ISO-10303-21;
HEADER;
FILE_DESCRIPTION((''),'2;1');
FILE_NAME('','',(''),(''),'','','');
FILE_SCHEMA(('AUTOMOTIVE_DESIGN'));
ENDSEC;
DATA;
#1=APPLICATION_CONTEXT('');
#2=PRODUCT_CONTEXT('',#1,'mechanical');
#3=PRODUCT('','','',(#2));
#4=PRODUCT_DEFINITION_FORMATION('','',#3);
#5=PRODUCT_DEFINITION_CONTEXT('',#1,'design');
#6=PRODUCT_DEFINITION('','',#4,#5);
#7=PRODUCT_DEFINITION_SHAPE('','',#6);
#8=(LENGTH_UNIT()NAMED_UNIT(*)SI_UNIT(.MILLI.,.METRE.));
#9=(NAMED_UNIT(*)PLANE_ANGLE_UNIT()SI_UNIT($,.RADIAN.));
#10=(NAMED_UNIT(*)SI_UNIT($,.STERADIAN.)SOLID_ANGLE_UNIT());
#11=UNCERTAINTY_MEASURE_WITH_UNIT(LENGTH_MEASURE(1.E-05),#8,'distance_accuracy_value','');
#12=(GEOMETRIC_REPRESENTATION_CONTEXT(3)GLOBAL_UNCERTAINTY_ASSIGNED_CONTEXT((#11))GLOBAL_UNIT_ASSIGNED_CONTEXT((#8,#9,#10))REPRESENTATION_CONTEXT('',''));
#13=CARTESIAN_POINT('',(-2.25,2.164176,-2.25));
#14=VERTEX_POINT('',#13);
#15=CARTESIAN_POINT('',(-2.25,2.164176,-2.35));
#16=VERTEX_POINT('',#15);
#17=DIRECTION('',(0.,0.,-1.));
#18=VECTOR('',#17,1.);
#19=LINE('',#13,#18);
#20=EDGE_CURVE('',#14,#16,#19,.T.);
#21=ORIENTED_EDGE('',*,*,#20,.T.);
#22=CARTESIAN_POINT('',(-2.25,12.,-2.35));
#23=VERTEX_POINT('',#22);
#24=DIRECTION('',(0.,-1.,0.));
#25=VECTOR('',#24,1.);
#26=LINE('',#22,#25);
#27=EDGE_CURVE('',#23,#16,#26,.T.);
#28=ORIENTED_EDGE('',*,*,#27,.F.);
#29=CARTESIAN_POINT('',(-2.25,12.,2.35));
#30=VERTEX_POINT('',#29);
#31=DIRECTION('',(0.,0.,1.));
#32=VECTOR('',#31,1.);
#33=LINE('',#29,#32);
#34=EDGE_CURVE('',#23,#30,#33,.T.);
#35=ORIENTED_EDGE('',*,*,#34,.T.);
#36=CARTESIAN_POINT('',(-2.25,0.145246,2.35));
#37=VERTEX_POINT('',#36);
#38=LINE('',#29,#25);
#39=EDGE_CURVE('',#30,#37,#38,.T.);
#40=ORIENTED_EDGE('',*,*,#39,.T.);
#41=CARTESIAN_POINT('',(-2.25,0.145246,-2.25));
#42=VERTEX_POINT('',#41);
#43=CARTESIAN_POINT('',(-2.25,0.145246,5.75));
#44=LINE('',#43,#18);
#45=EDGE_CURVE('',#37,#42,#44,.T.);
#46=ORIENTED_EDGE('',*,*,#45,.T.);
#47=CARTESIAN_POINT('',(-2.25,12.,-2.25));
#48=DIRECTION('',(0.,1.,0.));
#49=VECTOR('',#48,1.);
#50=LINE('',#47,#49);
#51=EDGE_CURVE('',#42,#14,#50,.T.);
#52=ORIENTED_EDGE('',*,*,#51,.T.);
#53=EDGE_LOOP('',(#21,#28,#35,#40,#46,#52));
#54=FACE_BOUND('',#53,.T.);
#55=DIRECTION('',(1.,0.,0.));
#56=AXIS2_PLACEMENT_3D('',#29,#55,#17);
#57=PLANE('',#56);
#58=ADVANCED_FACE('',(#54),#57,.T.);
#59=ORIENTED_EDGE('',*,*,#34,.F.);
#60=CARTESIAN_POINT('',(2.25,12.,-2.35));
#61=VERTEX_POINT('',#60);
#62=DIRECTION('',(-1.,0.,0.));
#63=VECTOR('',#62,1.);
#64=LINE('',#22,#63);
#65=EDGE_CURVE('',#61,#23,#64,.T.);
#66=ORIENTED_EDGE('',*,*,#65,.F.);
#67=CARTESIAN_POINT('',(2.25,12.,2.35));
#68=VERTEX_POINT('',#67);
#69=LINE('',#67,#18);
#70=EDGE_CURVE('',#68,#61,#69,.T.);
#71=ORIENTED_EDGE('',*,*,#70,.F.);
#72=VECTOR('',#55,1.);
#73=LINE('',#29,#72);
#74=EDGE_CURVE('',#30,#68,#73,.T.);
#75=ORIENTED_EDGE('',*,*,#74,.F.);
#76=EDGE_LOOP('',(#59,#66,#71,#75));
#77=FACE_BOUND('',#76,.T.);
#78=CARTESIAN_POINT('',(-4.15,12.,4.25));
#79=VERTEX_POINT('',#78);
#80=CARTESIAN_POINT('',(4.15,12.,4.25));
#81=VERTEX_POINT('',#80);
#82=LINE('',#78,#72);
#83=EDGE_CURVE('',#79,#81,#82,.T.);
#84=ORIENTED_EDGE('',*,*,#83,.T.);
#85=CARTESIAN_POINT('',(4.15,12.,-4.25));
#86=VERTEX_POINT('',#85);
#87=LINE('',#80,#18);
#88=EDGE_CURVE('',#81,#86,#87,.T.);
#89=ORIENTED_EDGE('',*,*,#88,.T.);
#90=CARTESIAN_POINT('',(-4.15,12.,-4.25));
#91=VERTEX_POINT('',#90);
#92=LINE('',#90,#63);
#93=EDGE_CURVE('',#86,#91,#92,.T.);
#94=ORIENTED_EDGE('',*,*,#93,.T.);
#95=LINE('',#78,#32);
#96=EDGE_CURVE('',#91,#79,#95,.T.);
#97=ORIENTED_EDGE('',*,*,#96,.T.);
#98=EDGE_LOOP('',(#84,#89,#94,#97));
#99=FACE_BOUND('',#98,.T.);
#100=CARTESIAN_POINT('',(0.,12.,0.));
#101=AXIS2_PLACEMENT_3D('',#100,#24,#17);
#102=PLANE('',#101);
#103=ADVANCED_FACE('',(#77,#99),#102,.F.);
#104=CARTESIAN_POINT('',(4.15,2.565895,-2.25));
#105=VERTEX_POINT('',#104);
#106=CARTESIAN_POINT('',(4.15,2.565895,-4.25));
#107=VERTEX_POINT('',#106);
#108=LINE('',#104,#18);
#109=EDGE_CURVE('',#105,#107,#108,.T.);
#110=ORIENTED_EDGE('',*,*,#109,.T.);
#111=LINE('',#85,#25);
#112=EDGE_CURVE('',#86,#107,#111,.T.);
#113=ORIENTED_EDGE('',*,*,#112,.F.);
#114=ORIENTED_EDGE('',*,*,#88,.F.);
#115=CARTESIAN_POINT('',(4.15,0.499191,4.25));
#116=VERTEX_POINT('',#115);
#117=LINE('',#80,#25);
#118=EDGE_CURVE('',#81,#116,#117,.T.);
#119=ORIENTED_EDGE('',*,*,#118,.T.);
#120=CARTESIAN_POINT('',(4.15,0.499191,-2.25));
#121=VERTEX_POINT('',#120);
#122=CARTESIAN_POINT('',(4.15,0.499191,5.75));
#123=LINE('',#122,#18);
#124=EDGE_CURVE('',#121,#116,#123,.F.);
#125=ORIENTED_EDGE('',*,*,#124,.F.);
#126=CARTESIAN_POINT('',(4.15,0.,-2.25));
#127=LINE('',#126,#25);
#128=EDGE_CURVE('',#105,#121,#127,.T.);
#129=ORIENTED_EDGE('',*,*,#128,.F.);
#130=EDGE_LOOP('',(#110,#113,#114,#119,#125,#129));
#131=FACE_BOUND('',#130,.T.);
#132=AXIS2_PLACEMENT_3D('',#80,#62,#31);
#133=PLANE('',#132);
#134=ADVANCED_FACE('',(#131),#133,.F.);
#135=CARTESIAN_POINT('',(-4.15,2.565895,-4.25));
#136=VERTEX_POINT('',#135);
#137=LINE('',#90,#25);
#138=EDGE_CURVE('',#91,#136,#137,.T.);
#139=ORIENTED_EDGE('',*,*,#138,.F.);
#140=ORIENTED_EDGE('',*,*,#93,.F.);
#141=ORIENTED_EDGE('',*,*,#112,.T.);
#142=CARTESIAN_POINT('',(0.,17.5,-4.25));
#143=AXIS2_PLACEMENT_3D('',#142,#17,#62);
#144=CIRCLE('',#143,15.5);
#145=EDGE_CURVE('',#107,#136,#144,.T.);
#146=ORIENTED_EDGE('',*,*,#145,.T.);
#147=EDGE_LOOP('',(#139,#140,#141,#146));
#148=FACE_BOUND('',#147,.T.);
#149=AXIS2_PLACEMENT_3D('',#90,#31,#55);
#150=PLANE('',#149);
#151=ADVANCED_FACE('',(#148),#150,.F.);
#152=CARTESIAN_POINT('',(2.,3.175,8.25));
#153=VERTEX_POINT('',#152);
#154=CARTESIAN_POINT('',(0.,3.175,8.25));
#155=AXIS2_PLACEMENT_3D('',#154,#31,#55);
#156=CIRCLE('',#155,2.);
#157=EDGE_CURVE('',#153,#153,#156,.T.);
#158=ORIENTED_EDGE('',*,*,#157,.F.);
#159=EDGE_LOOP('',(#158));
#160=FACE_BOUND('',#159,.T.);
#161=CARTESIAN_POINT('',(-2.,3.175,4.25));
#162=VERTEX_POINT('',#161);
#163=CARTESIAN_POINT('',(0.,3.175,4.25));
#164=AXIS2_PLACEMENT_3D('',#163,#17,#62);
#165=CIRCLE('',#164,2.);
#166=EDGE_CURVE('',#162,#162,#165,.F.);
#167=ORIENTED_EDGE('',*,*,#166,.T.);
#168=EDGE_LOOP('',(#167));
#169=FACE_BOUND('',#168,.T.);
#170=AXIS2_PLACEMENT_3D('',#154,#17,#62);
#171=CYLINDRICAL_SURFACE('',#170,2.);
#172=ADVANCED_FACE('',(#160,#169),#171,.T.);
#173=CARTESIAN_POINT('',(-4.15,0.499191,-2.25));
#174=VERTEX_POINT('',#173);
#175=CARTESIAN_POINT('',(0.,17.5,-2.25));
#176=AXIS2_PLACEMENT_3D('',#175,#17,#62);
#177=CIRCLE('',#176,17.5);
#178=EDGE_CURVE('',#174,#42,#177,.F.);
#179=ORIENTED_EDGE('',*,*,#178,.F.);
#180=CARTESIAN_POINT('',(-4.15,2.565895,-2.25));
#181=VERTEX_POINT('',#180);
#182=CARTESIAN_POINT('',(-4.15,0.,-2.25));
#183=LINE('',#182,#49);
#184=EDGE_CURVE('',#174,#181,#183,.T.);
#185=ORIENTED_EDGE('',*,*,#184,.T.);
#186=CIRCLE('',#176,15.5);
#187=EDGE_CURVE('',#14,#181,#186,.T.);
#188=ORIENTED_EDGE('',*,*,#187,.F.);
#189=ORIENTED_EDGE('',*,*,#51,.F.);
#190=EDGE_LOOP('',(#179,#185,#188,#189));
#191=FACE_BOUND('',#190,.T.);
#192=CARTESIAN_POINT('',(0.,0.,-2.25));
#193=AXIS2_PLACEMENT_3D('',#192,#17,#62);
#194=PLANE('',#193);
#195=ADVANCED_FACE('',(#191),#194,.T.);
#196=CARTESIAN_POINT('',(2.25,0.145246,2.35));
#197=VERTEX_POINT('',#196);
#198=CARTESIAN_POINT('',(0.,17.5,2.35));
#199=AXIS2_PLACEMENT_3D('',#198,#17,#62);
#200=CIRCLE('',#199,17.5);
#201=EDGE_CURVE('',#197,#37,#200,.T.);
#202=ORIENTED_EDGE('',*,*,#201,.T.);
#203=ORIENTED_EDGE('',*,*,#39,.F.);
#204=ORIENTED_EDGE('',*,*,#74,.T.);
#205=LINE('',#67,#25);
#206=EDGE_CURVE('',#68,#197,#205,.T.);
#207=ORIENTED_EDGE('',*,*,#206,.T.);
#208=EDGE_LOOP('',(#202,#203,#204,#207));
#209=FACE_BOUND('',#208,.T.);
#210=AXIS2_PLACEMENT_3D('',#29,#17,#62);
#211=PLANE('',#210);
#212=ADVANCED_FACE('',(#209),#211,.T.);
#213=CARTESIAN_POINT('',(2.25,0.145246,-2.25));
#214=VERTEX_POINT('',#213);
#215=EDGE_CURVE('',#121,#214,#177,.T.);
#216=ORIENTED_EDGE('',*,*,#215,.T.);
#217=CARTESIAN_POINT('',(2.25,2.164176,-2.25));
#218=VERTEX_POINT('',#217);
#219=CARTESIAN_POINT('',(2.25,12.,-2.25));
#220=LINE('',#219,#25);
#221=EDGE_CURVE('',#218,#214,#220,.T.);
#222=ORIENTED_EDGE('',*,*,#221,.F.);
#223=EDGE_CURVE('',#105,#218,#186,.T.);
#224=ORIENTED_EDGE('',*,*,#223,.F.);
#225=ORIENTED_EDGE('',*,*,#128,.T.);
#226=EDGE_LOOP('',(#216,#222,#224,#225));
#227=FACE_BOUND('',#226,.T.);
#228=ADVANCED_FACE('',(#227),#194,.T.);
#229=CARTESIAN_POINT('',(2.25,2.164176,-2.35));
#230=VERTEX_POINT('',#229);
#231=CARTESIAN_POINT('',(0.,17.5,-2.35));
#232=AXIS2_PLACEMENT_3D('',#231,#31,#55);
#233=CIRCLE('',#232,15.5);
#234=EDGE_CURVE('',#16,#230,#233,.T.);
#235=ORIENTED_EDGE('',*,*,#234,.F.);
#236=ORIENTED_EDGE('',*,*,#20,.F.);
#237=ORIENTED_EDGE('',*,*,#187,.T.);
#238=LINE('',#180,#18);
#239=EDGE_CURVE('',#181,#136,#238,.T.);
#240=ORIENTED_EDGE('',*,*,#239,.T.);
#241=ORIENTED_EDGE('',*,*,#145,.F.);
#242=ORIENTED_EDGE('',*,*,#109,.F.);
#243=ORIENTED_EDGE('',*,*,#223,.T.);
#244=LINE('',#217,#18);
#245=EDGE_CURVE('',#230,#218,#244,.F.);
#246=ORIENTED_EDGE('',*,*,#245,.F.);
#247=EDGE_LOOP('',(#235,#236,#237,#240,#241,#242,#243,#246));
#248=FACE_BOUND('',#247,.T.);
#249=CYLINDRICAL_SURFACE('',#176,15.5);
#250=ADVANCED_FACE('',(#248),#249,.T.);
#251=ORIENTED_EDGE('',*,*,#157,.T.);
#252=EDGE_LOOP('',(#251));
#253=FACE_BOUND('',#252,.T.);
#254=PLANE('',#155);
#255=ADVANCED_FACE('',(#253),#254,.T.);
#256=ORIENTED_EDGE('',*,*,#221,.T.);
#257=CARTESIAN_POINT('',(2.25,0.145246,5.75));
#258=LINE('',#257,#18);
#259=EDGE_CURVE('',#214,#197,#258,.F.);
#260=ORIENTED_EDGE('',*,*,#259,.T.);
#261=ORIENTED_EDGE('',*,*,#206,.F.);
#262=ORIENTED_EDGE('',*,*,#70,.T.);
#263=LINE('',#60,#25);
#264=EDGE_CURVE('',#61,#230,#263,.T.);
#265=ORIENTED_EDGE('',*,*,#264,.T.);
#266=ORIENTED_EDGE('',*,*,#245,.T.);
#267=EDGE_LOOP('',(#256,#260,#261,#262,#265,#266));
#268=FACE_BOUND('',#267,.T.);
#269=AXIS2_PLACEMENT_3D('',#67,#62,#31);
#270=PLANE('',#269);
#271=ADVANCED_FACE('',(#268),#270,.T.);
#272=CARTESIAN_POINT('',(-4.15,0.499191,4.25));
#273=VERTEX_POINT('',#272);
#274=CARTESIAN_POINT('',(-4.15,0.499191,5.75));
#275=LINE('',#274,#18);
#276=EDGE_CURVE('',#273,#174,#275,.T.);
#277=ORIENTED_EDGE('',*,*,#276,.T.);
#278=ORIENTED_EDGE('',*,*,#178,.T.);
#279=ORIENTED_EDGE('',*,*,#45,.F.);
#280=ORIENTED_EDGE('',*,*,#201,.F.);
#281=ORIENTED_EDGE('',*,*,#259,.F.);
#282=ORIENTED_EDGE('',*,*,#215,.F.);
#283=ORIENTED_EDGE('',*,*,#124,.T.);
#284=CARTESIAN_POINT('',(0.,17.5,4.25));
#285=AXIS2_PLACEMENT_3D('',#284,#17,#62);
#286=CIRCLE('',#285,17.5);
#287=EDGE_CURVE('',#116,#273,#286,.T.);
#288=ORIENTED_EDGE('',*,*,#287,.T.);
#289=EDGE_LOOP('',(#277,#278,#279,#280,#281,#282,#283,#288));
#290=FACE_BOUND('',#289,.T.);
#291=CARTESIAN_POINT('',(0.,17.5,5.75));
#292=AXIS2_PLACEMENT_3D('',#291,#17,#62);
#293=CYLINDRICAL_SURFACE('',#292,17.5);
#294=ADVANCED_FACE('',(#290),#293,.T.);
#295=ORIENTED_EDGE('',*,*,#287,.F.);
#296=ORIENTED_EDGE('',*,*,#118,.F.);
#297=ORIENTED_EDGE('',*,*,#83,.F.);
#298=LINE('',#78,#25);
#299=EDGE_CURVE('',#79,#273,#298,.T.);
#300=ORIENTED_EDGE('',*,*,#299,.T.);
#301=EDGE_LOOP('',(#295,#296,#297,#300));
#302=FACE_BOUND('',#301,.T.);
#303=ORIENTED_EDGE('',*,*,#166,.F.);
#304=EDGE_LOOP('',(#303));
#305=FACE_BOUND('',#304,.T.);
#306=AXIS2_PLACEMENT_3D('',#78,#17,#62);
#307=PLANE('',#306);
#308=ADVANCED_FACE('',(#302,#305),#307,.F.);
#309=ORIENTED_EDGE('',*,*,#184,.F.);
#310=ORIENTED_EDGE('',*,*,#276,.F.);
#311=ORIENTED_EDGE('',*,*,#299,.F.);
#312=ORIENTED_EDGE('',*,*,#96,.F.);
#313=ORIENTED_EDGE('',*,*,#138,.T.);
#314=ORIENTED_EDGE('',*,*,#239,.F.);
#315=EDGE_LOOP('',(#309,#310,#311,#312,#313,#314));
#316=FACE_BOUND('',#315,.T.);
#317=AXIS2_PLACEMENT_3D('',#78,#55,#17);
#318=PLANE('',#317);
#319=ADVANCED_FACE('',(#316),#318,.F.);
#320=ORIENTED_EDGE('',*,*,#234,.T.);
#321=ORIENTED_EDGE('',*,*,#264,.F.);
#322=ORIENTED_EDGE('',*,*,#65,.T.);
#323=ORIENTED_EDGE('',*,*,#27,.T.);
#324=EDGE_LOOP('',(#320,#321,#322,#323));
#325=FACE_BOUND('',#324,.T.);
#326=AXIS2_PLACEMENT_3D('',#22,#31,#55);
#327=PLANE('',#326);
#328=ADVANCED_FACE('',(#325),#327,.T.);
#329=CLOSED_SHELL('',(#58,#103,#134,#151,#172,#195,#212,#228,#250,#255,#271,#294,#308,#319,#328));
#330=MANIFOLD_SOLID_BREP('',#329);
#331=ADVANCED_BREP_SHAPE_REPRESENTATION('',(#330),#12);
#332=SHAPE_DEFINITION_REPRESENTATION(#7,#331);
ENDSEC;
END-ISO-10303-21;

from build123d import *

# Parameters (mm, degrees)
CROQUIS1_W              = 8.3
CROQUIS1_H              = 8.5
CROQUIS1_W_2            = 4.5
CROQUIS1_H_2            = 4.7
SALIENTE_EXTRUIR1_DEPTH = 12
CORTAR_EXTRUIR3_START   = -8.5
CORTAR_EXTRUIR3_DEPTH   = 8.5
CROQUIS3_R              = 2
SALIENTE_EXTRUIR2_DEPTH = 4
CORTAR_EXTRUIR4_START   = -2
CORTAR_EXTRUIR4_DEPTH   = 2


# Read off the part's stored shape, not the designer's step: Cortar-Extruir3
with BuildPart() as part:
    # Croquis1 → Saliente-Extruir1 (new body)
    with BuildSketch(Plane(origin=(0, 0, 0), x_dir=(1, 0, 0), z_dir=(0, 1, 0))):
        Rectangle(CROQUIS1_W, CROQUIS1_H)
        Rectangle(CROQUIS1_W_2, CROQUIS1_H_2, mode=Mode.SUBTRACT)
    extrude(amount=SALIENTE_EXTRUIR1_DEPTH)

    # Cortar-Extruir3 outline → Cortar-Extruir3 (cut)
    with BuildSketch(Plane(origin=(0, 0, -4.25), x_dir=(-1, 0, 0), z_dir=(0, 0, -1)).offset(CORTAR_EXTRUIR3_START)):
        with BuildLine():
            Line((0, 0), (4.15, 0))
            Line((4.15, 0), (4.15, 0.499191196))
            ThreePointArc((4.15, 0.499191196), (2.089957646, 0.125245986), (0, 0))
        make_face()
        with BuildLine():
            Line((-4.15, 0.499191196), (-4.15, 0))
            Line((-4.15, 0), (0, 0))
            ThreePointArc((0, 0), (-2.089957646, 0.125245986), (-4.15, 0.499191196))
        make_face()
    extrude(amount=CORTAR_EXTRUIR3_DEPTH, mode=Mode.SUBTRACT)

    # Croquis3 → Saliente-Extruir2 (add)
    with BuildSketch(Plane.XY.offset(4.25)):
        with Locations(Location((0, 3.175, 0), (0, 0, 180))):
            Circle(CROQUIS3_R)
    extrude(amount=SALIENTE_EXTRUIR2_DEPTH)

    # Croquis4 → Cortar-Extruir4 (cut)
    with BuildSketch(Plane(origin=(0, 0, -4.25), x_dir=(-1, 0, 0), z_dir=(0, 0, -1)).offset(CORTAR_EXTRUIR4_START)):
        with BuildLine():
            Line((-4.15, 2.565894737), (-4.15, 0.499191196))
            ThreePointArc((-4.15, 0.499191196), (0, 0), (4.15, 0.499191196))
            Line((4.15, 0.499191196), (4.15, 2.565894737))
            ThreePointArc((4.15, 2.565894737), (0, 2), (-4.15, 2.565894737))
        make_face()
    extrude(amount=CORTAR_EXTRUIR4_DEPTH, mode=Mode.SUBTRACT)


solid = part.part
